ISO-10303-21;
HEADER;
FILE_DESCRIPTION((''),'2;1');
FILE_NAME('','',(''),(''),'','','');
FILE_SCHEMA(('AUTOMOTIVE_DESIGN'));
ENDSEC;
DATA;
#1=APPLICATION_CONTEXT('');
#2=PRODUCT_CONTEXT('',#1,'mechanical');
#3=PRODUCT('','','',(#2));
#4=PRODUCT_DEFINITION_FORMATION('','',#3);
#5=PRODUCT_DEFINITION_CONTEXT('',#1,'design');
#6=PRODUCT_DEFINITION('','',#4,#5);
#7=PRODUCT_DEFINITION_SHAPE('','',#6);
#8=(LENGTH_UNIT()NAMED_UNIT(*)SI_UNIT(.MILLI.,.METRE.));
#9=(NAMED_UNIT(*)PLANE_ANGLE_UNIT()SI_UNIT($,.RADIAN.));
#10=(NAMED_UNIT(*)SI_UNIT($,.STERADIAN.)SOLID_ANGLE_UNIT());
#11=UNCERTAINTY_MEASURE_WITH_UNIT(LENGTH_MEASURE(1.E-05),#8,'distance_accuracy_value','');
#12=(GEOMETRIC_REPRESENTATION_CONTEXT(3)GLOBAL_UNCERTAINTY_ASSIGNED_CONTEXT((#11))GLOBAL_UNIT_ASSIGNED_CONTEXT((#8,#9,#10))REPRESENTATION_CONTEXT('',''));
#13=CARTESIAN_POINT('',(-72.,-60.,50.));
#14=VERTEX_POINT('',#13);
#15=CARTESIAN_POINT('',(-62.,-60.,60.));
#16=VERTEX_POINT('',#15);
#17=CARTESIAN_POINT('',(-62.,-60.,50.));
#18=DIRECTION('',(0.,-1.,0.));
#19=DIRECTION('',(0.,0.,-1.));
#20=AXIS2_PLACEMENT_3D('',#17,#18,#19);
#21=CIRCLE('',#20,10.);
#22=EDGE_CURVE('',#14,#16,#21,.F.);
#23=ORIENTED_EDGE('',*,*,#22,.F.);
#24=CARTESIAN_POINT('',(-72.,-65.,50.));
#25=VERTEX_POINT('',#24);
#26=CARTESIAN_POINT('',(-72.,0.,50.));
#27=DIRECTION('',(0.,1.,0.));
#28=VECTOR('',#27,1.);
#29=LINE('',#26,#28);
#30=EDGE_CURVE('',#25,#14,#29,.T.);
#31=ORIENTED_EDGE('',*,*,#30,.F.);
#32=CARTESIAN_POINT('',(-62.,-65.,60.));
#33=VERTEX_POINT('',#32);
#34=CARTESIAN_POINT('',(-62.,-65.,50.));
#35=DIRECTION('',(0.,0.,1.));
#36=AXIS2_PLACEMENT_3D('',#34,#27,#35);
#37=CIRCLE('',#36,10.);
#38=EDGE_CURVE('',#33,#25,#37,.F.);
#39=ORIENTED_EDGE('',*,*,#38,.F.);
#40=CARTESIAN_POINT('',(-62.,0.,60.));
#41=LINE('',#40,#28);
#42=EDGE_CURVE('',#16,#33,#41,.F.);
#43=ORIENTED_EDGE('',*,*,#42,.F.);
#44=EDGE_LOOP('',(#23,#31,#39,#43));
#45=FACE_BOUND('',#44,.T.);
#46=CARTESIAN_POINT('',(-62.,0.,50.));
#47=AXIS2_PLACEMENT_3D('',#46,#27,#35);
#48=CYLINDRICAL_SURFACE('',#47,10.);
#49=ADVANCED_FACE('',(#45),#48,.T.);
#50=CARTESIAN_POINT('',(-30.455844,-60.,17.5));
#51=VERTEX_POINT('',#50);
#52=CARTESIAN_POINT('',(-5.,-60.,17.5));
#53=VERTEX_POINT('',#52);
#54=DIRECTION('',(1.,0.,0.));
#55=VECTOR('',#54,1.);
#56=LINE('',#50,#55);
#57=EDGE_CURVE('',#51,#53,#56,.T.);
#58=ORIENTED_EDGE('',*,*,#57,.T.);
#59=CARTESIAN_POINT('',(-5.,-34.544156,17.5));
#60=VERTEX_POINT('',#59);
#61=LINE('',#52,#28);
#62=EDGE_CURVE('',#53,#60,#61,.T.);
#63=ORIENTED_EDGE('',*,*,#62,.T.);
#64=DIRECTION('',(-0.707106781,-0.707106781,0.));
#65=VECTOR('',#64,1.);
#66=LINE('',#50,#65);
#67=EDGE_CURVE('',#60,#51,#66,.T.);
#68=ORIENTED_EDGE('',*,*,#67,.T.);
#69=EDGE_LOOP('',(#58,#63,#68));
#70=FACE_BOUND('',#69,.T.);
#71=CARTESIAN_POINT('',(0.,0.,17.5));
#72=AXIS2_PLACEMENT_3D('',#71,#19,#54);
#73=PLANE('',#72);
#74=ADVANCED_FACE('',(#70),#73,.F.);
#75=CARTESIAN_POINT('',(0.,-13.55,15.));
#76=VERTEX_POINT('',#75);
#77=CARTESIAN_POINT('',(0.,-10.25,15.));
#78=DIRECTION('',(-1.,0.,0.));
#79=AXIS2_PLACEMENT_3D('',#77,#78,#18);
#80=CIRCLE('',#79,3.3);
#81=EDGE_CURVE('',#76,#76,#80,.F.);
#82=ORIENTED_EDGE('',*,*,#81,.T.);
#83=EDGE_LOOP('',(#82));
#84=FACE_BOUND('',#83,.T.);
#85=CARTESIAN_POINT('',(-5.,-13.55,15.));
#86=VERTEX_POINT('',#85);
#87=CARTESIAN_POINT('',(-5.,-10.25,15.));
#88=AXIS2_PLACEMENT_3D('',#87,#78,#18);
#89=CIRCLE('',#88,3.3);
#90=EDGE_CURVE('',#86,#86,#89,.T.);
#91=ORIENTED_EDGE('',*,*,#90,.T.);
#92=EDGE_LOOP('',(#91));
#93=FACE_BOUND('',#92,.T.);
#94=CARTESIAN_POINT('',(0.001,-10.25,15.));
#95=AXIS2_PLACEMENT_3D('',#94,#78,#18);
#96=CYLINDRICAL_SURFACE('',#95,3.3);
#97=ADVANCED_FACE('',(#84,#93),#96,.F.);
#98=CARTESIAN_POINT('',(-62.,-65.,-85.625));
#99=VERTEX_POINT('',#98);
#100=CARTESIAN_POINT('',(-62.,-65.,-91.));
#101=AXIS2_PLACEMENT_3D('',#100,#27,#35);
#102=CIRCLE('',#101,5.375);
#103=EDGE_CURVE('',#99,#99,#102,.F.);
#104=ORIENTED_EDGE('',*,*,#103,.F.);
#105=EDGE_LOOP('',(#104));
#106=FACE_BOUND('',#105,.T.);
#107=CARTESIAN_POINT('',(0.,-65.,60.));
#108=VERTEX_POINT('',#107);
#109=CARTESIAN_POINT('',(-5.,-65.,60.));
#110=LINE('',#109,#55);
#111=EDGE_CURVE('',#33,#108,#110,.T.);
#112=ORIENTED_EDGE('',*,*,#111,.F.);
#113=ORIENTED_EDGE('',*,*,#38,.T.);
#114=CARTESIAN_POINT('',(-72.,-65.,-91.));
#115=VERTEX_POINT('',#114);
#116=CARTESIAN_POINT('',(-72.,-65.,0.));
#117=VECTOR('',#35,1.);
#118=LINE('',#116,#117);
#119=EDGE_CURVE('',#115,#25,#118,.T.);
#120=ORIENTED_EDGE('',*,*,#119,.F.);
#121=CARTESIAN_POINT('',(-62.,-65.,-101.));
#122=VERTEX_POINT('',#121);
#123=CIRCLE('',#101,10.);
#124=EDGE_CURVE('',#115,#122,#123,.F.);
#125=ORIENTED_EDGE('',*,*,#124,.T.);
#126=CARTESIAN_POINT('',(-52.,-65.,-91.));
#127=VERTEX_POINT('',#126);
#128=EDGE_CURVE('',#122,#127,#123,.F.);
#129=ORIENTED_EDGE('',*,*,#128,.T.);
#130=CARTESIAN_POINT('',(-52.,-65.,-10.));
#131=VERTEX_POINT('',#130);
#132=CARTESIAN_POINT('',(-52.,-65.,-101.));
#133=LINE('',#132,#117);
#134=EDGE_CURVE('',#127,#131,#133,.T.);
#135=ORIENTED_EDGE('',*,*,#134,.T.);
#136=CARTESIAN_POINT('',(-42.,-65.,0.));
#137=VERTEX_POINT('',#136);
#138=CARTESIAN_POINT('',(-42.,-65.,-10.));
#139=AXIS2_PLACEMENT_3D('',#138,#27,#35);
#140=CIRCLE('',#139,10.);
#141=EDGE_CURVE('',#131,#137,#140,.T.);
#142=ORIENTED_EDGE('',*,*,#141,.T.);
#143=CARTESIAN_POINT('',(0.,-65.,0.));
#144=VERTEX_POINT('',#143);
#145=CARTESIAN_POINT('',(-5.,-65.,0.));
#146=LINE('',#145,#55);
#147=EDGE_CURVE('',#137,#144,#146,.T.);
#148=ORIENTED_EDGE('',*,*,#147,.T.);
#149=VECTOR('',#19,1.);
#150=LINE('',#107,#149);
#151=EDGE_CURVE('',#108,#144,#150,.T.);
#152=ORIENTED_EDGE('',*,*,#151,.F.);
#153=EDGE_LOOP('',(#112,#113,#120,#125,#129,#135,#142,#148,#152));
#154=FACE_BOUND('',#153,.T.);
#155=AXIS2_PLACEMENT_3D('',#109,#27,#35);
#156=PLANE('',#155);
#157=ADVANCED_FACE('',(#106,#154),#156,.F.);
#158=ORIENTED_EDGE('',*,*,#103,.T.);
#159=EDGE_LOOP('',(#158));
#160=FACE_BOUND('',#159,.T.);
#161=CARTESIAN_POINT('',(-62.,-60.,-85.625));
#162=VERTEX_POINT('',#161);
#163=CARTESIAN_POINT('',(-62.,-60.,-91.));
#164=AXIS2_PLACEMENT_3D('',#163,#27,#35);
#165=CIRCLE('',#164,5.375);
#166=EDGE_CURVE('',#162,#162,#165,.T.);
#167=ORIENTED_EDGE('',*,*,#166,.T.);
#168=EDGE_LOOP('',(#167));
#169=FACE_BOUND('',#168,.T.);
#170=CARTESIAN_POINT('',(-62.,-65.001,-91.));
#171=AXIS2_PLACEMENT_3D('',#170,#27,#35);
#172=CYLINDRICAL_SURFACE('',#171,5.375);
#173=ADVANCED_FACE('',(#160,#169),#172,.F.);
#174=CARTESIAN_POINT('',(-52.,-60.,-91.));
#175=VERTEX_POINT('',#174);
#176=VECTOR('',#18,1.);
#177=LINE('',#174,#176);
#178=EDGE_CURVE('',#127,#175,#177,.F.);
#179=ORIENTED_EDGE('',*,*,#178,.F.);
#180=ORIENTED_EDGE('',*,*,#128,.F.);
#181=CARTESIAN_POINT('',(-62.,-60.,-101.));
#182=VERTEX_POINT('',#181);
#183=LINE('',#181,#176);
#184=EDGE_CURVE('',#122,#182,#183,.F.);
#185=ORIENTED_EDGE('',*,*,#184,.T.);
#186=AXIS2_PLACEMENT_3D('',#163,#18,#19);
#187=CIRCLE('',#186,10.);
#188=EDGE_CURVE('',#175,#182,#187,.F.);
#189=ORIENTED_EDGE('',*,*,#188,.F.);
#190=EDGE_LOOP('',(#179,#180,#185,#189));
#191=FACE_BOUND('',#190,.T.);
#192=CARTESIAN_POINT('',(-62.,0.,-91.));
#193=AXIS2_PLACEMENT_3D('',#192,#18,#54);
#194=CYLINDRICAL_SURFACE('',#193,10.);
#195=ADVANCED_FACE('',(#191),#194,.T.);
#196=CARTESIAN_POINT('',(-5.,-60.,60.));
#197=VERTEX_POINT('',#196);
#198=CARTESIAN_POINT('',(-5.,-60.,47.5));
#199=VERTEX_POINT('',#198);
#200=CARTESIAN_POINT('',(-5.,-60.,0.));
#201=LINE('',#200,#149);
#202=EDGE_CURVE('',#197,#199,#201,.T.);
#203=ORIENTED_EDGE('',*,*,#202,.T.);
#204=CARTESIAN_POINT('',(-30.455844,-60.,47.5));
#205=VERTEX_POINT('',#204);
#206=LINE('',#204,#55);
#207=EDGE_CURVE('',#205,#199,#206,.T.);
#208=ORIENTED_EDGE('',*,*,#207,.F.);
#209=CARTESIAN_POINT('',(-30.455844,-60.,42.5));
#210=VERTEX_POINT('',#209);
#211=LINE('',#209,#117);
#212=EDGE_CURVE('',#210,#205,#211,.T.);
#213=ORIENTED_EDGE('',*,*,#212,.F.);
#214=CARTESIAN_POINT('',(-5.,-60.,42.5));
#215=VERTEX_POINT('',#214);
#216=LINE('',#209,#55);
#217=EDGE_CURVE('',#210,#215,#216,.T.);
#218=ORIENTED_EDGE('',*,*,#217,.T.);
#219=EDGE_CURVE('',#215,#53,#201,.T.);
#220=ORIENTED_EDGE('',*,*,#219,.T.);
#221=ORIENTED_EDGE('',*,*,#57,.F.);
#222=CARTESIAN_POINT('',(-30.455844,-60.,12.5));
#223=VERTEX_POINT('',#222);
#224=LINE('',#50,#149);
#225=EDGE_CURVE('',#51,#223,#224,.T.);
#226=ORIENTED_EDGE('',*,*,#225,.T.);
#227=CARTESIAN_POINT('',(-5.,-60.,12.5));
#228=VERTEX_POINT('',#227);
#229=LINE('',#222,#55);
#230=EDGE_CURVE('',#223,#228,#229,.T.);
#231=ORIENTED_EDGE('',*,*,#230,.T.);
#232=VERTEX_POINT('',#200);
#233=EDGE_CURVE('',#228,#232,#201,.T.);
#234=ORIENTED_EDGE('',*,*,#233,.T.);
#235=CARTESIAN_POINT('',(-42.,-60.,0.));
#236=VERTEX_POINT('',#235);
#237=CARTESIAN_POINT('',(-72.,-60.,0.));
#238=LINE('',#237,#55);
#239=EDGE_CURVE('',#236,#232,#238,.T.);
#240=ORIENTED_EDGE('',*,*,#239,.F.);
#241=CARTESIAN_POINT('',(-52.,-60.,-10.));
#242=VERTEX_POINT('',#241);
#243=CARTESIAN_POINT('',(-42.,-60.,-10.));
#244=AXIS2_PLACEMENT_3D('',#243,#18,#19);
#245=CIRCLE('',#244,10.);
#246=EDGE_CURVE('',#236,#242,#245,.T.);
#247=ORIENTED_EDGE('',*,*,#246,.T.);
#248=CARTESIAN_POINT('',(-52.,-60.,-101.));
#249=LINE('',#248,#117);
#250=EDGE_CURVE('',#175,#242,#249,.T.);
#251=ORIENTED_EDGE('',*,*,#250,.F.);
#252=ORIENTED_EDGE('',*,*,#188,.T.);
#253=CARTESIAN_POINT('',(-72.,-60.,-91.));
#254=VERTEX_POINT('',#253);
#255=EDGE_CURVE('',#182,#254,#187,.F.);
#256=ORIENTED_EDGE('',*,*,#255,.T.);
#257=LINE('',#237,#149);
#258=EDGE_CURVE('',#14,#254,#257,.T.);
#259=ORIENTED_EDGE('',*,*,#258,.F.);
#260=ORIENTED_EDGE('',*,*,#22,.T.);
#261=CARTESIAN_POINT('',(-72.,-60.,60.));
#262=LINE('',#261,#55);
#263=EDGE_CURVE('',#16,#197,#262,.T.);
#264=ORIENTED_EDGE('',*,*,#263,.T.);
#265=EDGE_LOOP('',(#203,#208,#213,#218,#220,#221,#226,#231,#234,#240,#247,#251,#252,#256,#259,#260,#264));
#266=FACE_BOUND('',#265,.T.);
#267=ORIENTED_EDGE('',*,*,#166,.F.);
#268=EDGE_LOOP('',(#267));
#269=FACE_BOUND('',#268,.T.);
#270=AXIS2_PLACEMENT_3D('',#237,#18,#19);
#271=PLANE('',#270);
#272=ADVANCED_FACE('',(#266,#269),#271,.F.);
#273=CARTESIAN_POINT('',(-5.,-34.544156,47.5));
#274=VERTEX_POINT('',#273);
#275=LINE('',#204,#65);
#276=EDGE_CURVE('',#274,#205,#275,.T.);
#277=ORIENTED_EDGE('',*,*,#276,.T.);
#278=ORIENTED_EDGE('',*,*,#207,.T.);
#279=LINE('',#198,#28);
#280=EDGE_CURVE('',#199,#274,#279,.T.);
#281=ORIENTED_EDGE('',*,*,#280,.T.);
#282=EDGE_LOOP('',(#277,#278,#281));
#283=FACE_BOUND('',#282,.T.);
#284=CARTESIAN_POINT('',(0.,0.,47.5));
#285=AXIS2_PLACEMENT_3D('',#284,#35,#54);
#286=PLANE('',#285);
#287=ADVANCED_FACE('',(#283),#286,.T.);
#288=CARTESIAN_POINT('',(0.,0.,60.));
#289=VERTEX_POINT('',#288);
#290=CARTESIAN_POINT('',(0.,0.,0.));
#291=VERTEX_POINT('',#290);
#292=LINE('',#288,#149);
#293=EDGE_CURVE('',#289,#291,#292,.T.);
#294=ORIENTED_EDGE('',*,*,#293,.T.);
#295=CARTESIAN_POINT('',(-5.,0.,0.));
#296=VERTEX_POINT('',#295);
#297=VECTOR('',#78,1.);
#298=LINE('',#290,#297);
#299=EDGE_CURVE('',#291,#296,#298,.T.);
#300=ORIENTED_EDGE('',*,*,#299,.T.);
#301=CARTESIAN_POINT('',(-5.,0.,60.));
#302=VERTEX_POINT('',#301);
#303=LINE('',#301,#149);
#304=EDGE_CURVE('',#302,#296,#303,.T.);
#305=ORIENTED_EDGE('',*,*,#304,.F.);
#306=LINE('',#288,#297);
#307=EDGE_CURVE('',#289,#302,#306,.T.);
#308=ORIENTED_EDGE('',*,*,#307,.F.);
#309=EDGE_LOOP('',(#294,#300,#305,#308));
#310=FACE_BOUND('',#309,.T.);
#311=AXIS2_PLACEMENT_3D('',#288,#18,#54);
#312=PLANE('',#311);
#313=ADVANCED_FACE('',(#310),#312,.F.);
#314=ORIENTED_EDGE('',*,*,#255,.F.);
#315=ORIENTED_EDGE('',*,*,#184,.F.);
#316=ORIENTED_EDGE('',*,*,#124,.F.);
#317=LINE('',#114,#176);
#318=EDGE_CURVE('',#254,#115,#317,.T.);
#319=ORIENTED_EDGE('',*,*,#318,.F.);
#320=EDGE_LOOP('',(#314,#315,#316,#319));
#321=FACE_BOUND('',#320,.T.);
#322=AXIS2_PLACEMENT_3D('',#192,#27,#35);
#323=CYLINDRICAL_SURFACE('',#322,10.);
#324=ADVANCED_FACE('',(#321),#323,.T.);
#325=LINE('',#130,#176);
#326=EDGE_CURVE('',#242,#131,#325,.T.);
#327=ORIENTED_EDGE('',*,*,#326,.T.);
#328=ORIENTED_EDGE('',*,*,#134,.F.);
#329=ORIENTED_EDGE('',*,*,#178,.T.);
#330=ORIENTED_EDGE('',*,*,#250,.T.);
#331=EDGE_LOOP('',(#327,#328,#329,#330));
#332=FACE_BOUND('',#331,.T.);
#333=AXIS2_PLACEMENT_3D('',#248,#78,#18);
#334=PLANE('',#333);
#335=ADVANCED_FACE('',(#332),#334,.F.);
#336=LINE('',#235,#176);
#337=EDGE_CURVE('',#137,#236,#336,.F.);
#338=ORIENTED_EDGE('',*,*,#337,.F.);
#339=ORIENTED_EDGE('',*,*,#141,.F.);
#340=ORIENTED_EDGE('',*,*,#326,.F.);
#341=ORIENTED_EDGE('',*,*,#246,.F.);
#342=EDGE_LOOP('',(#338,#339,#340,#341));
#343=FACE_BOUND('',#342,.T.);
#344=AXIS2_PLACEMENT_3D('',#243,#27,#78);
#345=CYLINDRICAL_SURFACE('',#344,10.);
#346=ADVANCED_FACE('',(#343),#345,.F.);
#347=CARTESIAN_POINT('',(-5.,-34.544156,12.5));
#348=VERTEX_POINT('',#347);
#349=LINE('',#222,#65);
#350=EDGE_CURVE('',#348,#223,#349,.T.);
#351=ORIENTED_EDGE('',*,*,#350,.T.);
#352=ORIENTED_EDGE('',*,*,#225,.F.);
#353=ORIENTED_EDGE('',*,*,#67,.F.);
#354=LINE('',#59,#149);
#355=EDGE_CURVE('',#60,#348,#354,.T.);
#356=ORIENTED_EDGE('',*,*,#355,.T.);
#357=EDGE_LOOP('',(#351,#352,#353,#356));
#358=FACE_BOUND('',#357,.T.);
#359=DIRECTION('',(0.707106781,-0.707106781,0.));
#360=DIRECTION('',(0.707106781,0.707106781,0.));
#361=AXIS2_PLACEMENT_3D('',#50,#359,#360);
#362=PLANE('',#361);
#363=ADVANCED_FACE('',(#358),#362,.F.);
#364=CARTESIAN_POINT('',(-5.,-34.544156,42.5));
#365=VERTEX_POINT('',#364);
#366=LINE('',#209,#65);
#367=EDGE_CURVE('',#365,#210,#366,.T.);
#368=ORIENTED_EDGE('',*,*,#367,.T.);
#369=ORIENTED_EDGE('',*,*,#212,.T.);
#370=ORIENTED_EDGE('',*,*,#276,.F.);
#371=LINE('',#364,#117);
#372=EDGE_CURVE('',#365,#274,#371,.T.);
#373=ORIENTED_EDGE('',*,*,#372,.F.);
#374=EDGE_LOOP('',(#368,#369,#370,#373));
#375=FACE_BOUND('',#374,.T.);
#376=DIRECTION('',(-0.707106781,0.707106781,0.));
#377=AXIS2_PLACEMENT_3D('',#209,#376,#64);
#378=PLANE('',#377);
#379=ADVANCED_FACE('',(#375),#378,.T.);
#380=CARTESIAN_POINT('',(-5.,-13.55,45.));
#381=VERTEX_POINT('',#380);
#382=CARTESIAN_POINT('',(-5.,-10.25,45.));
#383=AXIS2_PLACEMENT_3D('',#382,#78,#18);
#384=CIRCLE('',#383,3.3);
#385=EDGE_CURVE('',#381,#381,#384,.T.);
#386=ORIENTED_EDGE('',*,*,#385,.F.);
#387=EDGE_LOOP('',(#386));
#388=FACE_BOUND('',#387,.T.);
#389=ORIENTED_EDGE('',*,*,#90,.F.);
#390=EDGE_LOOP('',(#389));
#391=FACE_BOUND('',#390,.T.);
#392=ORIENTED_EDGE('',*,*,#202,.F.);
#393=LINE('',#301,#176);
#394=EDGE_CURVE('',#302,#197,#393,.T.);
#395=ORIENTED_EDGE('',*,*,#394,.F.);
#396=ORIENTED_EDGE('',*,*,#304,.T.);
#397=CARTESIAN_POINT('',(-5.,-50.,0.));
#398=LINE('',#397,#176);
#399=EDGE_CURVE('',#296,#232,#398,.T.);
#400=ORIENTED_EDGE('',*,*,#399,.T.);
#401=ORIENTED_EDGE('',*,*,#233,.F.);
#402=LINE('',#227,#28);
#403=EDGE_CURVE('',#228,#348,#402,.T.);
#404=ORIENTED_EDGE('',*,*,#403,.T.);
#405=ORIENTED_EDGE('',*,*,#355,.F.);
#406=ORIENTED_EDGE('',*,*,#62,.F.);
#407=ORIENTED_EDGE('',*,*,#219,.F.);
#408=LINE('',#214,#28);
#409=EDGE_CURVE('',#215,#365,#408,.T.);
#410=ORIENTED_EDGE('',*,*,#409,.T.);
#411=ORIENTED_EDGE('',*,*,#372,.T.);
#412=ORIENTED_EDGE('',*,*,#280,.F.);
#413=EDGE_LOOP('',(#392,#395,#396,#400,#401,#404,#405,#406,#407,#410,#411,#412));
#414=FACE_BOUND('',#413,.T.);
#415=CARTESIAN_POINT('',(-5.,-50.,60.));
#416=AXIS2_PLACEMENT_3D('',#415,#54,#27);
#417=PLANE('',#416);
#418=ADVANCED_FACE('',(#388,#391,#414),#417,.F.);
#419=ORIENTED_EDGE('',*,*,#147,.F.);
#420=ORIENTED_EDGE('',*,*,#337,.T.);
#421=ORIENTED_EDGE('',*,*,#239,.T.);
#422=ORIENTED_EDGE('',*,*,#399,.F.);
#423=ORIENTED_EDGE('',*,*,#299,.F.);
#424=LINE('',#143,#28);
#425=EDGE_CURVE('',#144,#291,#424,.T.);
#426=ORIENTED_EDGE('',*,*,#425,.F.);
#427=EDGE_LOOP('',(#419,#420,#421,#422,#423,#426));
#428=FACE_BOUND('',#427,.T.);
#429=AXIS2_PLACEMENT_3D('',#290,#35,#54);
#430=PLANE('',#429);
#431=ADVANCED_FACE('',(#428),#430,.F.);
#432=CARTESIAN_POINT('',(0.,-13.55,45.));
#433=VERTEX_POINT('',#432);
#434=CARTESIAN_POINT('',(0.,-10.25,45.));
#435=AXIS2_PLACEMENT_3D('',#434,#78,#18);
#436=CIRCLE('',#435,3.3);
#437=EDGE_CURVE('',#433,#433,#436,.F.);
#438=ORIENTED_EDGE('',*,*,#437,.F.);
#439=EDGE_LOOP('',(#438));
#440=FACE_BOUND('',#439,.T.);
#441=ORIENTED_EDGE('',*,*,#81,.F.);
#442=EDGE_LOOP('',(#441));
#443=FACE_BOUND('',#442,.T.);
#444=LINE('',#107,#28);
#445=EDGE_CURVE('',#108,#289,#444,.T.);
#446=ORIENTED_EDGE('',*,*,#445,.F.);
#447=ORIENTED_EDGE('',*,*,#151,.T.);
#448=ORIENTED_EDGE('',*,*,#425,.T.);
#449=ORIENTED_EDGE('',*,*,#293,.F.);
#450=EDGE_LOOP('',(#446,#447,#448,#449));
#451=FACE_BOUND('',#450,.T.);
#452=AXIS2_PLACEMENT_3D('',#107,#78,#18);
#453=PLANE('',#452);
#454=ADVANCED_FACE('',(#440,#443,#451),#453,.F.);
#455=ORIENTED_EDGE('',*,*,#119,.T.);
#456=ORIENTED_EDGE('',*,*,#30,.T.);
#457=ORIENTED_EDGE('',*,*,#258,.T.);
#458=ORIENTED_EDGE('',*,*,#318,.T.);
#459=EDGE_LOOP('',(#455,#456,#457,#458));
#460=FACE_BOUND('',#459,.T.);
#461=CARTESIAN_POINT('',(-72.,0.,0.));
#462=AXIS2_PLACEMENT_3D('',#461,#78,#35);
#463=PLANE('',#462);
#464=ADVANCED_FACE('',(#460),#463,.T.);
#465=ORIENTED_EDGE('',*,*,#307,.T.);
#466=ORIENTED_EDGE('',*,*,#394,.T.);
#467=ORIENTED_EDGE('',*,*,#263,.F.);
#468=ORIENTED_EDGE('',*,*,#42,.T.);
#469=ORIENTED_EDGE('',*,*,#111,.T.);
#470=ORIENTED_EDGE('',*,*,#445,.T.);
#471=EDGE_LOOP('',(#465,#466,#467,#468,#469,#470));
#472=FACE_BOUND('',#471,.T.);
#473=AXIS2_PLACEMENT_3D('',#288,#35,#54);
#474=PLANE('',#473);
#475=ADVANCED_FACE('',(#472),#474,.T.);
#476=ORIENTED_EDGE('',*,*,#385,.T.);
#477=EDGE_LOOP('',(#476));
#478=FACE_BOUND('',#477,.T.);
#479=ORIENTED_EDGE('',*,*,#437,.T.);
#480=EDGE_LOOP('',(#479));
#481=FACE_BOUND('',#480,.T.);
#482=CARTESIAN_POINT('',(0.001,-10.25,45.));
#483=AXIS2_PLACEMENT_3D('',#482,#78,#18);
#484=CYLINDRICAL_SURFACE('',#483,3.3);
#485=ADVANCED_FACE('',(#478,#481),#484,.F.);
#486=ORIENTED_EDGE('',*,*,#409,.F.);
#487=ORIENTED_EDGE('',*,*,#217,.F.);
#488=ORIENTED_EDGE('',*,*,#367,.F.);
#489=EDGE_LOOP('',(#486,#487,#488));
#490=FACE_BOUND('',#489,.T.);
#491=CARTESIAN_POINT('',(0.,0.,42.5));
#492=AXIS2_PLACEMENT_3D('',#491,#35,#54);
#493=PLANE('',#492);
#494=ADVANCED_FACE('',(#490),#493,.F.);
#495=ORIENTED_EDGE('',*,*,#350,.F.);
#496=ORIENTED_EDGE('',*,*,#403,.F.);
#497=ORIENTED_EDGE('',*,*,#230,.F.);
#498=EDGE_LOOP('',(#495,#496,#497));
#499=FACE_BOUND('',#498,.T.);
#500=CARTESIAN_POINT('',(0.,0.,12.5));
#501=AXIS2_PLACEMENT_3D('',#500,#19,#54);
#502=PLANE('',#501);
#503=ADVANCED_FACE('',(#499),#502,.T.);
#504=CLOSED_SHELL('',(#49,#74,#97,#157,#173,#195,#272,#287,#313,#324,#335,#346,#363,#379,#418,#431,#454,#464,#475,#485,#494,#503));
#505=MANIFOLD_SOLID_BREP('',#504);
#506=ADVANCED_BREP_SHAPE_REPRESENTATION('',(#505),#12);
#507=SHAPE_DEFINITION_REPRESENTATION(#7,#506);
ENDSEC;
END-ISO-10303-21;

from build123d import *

# Parameters (mm, degrees)
BOSS_EXTRUDE1_DEPTH = 60
SKETCH3_W           = 60
SKETCH3_H           = 5
BOSS_EXTRUDE2_DEPTH = 67
SKETCH4_W           = 20
SKETCH4_H           = 5
BOSS_EXTRUDE3_DEPTH = 101
CUT_EXTRUDE1_REACH  = 139.786
SKETCH6_R           = 5.375
CUT_EXTRUDE2_REACH  = 139.532
SKETCH11_R          = 3.3
FILLET1_R           = 10
FILLET3_R           = 10
FILLET4_R           = 10
BOSS_EXTRUDE4_DEPTH = 2.5


with BuildPart() as part:
    # Sketch1 → Boss-Extrude1 (new body)
    with BuildSketch(Plane.XY):
        Polygon((-5, 0), (-5, -50), (-5, -65), (0, -65), (0, 0), align=None)
    extrude(amount=BOSS_EXTRUDE1_DEPTH)

    # Sketch3 → Boss-Extrude2 (add)
    with BuildSketch(Plane.ZY.offset(5)):
        with Locations((30, -62.5)):
            Rectangle(SKETCH3_W, SKETCH3_H)
    extrude(amount=BOSS_EXTRUDE2_DEPTH)

    # Sketch4 → Boss-Extrude3 (add)
    with BuildSketch(Plane(origin=(0, 0, 0), x_dir=(-1, 0, 0), z_dir=(0, 0, -1))):
        with Locations((62, -62.5)):
            Rectangle(SKETCH4_W, SKETCH4_H)
    extrude(amount=BOSS_EXTRUDE3_DEPTH)

    # Sketch6 → Cut-Extrude1 (cut, up to next)
    with BuildSketch(Plane(origin=(0, -60, 0), x_dir=(1, 0, 0), z_dir=(0, 1, 0)), mode=Mode.PRIVATE) as cut_extrude1_sk1:
        with Locations(Location((-62, 91, 0), (0, 0, 270))):
            Circle(SKETCH6_R)
    cut_extrude1_tool1 = extrude(cut_extrude1_sk1.sketch, amount=-CUT_EXTRUDE1_REACH, mode=Mode.PRIVATE) & part.part
    add(cut_extrude1_tool1.solids().sort_by_distance((-62, -60, -91))[0], mode=Mode.SUBTRACT)

    # Sketch11 → Cut-Extrude2 (cut, up to next)
    with BuildSketch(Plane.ZY.offset(5), mode=Mode.PRIVATE) as cut_extrude2_sk1:
        with Locations(Location((15, -10.25, 0), (0, 0, 270))):
            Circle(SKETCH11_R)
    cut_extrude2_tool1 = extrude(cut_extrude2_sk1.sketch, amount=-CUT_EXTRUDE2_REACH, mode=Mode.PRIVATE) & part.part
    # Sketch11 → Cut-Extrude2 (cut, up to next)
    with BuildSketch(Plane.ZY.offset(5), mode=Mode.PRIVATE) as cut_extrude2_sk2:
        with Locations(Location((45, -10.25, 0), (0, 0, 270))):
            Circle(SKETCH11_R)
    cut_extrude2_tool2 = extrude(cut_extrude2_sk2.sketch, amount=-CUT_EXTRUDE2_REACH, mode=Mode.PRIVATE) & part.part
    add(cut_extrude2_tool1.solids().sort_by_distance((-5, -10.25, 15))[0], mode=Mode.SUBTRACT)
    add(cut_extrude2_tool2.solids().sort_by_distance((-5, -10.25, 45))[0], mode=Mode.SUBTRACT)

    # Fillet1
    fillet1_edges = [part.edges().sort_by_distance(p)[0] for p in [
        (-52, -62.5, -101),
        (-72, -62.5, -101),
    ]]
    fillet(fillet1_edges, radius=FILLET1_R - 0.0001)  # a hair under: the kernel refuses the full size

    # Fillet3
    fillet3_edges = [part.edges().sort_by_distance(p)[0] for p in [
        (-52, -62.5, 0),
    ]]
    fillet(fillet3_edges, radius=FILLET3_R)

    # Fillet4
    fillet4_edges = [part.edges().sort_by_distance(p)[0] for p in [
        (-72, -62.5, 60),
    ]]
    fillet(fillet4_edges, radius=FILLET4_R)

    # Sketch13 → Boss-Extrude4 (add, symmetric)
    with BuildSketch(Plane.XY.offset(45)):
        Polygon((-30.455844123, -60), (-5, -34.544155877), (-5, -60), align=None)
    boss_extrude4 = extrude(amount=BOSS_EXTRUDE4_DEPTH, both=True)

    # Mirror1: Boss-Extrude4 across plane
    add(boss_extrude4.mirror(Plane.XY.offset(30)))


solid = part.part
